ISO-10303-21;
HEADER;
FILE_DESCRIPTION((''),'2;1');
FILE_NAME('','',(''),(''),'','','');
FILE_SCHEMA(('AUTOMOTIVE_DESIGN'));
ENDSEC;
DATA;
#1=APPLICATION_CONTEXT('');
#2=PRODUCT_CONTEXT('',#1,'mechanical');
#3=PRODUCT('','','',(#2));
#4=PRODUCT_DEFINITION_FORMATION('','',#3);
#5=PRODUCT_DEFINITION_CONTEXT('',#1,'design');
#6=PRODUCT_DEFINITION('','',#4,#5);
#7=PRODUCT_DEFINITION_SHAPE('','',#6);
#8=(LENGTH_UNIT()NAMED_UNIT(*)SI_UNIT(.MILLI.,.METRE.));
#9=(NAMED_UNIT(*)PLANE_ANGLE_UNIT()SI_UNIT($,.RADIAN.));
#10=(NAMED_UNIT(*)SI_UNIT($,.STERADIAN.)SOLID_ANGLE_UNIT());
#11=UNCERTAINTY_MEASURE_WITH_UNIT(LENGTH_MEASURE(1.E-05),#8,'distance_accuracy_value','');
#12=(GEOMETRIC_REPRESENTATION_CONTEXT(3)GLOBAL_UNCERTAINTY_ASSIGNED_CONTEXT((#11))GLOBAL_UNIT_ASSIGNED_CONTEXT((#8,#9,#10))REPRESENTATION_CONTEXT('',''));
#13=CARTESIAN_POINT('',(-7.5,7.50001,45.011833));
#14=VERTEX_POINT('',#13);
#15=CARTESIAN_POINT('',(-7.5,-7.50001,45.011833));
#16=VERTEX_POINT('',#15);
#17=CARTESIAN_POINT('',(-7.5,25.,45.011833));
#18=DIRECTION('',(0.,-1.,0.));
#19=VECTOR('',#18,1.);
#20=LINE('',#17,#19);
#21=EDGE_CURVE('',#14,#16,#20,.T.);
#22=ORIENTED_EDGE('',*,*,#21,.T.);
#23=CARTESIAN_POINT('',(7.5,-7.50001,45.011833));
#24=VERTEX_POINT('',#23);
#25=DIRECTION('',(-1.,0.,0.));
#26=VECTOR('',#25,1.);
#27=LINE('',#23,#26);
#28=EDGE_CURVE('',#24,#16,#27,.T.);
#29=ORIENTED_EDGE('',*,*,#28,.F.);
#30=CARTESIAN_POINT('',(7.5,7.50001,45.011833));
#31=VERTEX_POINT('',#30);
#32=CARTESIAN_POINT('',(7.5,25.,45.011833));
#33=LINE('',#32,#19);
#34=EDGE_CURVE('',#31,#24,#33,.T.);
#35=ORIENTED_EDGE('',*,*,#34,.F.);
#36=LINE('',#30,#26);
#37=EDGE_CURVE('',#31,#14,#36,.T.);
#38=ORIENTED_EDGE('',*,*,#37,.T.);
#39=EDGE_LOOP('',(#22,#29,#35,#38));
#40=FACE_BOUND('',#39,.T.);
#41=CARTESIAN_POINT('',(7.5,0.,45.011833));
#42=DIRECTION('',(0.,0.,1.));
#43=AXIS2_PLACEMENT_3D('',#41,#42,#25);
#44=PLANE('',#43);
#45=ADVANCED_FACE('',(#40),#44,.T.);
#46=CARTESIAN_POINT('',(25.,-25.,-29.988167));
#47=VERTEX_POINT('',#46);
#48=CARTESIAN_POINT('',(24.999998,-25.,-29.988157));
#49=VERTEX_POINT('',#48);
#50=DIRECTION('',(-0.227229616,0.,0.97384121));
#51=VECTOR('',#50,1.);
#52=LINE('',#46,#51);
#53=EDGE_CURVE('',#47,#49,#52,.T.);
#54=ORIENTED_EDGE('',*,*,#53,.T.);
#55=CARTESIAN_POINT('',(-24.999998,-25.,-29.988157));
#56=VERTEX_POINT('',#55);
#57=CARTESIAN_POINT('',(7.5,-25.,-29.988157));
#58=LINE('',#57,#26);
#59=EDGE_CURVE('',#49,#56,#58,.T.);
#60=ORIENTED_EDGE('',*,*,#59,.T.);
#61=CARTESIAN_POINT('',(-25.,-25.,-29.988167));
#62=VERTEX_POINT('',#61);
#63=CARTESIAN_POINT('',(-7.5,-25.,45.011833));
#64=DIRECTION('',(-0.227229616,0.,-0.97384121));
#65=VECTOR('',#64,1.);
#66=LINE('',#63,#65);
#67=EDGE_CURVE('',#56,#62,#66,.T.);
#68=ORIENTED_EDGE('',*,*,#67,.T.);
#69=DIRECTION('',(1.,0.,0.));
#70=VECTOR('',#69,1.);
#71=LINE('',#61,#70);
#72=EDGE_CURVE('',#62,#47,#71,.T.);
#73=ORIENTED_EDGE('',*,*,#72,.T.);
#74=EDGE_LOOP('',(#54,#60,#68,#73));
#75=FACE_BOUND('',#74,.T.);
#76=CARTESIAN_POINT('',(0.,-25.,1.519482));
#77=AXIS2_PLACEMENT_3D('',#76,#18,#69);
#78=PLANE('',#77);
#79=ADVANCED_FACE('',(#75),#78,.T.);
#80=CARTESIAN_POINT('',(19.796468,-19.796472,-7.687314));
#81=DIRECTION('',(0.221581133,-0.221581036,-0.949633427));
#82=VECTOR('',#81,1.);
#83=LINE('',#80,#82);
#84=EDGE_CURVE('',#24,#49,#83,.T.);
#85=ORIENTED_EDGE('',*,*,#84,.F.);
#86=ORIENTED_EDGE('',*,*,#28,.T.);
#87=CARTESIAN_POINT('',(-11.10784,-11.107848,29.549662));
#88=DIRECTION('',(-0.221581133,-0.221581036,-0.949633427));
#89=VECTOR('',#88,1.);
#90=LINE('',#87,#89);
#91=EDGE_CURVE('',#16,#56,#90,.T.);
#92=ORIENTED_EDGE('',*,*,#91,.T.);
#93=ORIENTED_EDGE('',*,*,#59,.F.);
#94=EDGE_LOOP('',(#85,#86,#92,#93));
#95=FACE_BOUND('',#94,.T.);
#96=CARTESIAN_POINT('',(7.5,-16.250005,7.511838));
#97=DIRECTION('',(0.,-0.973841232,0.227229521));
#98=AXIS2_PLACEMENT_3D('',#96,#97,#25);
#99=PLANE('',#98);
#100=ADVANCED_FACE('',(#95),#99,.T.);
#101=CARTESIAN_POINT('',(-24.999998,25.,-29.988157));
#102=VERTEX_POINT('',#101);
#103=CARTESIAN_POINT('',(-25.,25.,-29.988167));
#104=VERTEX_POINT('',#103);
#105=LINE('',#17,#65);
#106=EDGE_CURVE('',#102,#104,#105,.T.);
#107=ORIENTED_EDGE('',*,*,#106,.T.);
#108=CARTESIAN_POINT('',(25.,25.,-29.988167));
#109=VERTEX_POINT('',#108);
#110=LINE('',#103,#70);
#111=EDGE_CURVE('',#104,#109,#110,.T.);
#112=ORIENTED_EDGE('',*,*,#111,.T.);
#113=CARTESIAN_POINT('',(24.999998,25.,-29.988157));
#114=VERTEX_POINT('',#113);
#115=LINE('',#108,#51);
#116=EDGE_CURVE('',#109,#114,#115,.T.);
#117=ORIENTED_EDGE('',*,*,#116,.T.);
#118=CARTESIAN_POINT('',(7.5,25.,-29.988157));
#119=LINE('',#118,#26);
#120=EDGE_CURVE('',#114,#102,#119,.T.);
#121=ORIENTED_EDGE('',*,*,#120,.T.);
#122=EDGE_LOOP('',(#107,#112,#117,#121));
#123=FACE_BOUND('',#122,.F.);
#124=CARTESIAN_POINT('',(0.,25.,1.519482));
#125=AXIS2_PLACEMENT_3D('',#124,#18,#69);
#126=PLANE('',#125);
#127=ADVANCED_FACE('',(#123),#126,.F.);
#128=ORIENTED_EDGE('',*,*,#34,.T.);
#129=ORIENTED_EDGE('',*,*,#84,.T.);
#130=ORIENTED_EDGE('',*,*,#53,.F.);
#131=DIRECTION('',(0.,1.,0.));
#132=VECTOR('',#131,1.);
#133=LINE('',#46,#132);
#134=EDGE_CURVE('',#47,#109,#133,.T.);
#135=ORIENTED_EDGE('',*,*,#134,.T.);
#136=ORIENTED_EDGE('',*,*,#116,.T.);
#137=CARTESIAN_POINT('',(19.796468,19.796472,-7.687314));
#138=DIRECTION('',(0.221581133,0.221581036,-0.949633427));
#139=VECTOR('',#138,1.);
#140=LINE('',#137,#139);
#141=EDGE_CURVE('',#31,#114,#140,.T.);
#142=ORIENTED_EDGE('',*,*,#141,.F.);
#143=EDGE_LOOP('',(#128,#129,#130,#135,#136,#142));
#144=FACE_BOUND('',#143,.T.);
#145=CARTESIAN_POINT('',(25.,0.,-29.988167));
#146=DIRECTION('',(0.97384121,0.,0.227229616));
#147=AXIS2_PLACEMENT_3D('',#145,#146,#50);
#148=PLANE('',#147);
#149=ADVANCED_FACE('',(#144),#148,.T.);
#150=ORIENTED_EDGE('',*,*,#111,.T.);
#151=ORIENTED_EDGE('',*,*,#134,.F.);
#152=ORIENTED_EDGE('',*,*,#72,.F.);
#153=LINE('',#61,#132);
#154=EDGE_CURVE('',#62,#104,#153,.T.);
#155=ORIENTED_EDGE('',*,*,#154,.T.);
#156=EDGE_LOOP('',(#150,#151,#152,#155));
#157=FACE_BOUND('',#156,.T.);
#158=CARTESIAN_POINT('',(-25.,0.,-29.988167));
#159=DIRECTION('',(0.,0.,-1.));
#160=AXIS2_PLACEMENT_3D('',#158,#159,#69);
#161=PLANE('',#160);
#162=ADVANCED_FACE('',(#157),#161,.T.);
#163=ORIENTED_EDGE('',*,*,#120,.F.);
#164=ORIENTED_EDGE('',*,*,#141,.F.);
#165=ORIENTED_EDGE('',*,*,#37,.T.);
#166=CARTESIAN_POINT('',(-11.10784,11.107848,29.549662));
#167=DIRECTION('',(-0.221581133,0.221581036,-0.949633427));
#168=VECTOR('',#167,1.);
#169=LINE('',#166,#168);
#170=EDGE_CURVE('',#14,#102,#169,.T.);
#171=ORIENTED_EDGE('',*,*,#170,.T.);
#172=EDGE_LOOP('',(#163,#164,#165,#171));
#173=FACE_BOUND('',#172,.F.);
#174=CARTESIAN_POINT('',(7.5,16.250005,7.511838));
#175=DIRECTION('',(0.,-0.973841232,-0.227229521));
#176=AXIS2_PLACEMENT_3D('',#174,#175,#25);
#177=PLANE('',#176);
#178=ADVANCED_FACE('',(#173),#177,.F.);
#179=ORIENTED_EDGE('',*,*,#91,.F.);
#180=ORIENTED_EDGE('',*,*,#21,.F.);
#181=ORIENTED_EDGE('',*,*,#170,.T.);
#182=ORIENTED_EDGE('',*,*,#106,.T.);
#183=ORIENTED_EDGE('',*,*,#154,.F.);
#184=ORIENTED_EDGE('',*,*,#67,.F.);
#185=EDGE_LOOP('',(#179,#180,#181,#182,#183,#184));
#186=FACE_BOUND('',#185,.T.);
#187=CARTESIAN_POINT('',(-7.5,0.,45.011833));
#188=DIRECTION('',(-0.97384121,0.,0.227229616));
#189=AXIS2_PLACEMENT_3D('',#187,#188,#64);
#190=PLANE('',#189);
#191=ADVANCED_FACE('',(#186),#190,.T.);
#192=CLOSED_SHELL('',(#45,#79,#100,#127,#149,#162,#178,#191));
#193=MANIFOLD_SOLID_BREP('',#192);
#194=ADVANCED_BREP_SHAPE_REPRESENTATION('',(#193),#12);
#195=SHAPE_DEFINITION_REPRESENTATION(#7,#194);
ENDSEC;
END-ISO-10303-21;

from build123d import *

# Parameters (mm, degrees)
F1_DEPTH = 25
F2_SIZE2 = 74.99999
F2_SIZE  = 17.49999


# Not quite as in the source:
# - a fillet or chamfer is up to 0.001 mm smaller than in the source, because OpenCascade refuses the exact size


with BuildPart() as f1:
    # F0 (on Front) → F1 (new body, symmetric)
    with BuildSketch(Plane.XZ):
        Polygon((25, -29.9881670944), (7.5, 45.0118329056), (-7.5, 45.0118329056), (-25, -29.9881670944), align=None)
    extrude(amount=F1_DEPTH, both=True)

    # F2 (size 17.5 and 75 in the source; OpenCascade refuses exactly that, so slightly less here)
    f2_edges = [f1.edges().sort_by_distance(p)[0] for p in [
        (0, 25, 45.011833),
        (0, -25, 45.011833),
    ]]
    f2_side = f1.faces().sort_by_distance((0, 0, 45.011833))[0]
    chamfer(f2_edges, length=F2_SIZE, length2=F2_SIZE2, reference=f2_side)


solid = f1.part
